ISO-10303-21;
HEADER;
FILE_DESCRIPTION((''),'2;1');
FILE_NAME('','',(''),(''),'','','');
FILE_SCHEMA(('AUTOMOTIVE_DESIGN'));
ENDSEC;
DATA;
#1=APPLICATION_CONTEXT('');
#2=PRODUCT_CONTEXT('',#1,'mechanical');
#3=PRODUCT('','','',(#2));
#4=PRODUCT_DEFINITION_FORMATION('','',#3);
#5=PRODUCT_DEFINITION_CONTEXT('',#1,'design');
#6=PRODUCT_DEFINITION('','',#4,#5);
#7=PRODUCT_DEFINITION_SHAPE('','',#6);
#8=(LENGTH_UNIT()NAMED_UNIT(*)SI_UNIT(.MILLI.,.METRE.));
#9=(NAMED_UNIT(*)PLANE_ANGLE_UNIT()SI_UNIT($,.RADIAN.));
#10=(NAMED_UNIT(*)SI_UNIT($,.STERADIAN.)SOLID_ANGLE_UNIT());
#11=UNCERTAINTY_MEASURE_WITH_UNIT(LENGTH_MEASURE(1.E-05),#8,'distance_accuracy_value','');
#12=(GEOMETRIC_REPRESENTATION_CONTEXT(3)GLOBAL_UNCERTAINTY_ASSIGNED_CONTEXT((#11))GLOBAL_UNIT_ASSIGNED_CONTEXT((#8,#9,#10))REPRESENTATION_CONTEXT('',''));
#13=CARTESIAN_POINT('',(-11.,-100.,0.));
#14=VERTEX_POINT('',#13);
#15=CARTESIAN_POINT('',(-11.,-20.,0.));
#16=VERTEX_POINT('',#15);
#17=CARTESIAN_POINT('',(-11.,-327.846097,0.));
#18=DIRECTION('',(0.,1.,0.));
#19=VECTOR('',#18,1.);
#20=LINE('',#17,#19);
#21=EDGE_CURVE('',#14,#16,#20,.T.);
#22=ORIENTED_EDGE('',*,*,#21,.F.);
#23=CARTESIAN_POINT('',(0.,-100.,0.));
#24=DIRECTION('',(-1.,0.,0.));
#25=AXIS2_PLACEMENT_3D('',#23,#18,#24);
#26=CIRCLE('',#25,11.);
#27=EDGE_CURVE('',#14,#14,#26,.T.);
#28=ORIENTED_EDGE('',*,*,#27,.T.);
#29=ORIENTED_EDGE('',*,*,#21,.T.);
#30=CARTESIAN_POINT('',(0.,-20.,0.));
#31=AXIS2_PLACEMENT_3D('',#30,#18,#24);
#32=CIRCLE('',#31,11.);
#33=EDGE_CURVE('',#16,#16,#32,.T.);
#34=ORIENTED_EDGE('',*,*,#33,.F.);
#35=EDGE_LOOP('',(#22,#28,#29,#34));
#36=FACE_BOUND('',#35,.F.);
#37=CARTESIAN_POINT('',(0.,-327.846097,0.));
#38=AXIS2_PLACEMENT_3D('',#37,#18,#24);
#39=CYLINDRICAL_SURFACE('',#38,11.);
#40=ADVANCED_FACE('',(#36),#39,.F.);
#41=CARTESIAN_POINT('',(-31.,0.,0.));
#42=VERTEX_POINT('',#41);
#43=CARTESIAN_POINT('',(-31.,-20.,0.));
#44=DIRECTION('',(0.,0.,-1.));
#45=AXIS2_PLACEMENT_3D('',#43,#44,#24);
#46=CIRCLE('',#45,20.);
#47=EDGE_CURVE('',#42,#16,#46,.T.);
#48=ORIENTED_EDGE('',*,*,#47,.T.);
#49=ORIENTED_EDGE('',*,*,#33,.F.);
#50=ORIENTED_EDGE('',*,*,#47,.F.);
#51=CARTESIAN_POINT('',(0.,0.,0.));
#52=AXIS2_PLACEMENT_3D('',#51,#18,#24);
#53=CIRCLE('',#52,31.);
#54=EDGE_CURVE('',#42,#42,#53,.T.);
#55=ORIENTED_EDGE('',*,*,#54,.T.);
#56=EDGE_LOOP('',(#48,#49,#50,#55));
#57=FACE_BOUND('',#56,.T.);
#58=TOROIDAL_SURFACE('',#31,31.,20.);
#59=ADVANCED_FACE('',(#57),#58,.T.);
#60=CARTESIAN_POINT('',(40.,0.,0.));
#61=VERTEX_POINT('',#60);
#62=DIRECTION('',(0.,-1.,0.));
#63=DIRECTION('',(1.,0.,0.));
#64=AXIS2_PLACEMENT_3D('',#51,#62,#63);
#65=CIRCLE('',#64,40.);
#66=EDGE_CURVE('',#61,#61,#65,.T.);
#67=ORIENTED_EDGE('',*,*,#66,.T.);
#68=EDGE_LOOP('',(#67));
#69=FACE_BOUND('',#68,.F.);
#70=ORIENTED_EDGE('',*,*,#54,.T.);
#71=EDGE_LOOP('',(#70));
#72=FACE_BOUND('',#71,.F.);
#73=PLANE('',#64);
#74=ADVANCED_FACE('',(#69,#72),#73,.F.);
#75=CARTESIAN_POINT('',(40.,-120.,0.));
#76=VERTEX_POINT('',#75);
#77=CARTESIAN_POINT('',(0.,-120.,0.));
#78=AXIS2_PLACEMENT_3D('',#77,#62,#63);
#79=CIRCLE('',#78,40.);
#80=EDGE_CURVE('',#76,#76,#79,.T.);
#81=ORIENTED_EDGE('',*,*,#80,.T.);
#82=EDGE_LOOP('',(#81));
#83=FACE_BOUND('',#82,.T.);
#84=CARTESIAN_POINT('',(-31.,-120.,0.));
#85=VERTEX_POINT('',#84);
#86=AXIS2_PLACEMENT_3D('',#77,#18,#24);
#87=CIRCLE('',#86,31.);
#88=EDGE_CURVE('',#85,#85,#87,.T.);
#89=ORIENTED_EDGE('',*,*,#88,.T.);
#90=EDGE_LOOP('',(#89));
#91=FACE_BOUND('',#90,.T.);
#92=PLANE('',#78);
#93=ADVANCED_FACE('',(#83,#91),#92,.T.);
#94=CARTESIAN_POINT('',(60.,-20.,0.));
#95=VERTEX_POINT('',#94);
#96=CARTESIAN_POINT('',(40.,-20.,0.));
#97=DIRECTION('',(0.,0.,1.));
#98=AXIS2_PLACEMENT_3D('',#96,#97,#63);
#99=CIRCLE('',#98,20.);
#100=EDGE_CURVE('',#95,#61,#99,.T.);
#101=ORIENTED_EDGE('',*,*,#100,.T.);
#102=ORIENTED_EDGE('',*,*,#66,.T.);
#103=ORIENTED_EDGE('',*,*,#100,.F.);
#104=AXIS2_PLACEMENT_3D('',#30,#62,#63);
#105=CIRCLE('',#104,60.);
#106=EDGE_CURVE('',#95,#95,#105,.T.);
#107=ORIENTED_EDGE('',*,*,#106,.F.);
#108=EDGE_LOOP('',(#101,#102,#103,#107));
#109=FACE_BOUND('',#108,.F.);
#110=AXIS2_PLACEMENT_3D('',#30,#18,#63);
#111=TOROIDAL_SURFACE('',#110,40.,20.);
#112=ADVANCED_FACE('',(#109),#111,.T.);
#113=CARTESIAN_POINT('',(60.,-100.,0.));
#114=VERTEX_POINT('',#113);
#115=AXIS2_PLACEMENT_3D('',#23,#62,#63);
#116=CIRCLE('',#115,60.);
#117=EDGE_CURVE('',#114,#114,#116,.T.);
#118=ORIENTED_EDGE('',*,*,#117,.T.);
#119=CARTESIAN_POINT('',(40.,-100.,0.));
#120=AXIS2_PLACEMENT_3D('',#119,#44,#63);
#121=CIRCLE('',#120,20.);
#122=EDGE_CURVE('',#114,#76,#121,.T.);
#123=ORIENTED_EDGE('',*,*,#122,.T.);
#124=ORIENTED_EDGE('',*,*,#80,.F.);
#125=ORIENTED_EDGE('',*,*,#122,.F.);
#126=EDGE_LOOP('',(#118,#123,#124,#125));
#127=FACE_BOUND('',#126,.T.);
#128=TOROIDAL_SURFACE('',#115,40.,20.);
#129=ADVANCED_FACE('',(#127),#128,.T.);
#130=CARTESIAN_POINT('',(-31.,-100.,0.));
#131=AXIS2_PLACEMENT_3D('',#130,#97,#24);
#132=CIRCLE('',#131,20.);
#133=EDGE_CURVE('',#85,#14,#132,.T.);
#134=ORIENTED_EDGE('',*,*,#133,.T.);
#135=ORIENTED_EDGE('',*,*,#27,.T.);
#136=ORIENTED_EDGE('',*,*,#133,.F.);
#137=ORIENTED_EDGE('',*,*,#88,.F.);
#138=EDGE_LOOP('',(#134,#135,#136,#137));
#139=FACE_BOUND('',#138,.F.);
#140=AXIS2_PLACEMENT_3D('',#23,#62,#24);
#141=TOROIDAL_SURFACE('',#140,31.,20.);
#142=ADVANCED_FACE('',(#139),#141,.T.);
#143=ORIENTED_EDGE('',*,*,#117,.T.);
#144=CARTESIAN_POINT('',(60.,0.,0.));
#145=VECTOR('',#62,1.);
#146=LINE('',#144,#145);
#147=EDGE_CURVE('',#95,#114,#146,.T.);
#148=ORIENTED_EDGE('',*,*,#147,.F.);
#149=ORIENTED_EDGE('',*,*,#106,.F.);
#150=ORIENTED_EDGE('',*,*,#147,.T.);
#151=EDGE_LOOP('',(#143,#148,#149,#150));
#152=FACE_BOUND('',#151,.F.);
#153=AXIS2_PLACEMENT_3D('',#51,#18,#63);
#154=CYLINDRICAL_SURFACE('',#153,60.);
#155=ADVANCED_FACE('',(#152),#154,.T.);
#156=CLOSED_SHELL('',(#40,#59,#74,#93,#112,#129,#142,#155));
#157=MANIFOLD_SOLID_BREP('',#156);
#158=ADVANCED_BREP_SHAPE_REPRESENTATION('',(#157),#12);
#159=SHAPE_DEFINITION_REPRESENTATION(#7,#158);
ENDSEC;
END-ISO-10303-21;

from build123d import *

# Parameters (mm, degrees)
F0_R     = 60
F1_DEPTH = 120
F3_D     = 22
F4_R     = 20


with BuildPart() as f1:
    # F0 (on Front) → F1 (new body)
    with BuildSketch(Plane.XZ):
        Circle(F0_R)
    extrude(amount=F1_DEPTH)

    # F3 (through all)
    with Locations(Plane.XZ.offset(120)):
        with Locations((0, 0)):
            Hole(F3_D / 2)

    # F4
    f4_edges = [f1.edges().sort_by_distance(p)[0] for p in [
        (60, -60, 0),
        (-60, 0, 0),
        (-60, -120, 0),
        (-11, 0, 0),
        (-11, -120, 0),
    ]]
    fillet(f4_edges, radius=F4_R)


solid = f1.part
